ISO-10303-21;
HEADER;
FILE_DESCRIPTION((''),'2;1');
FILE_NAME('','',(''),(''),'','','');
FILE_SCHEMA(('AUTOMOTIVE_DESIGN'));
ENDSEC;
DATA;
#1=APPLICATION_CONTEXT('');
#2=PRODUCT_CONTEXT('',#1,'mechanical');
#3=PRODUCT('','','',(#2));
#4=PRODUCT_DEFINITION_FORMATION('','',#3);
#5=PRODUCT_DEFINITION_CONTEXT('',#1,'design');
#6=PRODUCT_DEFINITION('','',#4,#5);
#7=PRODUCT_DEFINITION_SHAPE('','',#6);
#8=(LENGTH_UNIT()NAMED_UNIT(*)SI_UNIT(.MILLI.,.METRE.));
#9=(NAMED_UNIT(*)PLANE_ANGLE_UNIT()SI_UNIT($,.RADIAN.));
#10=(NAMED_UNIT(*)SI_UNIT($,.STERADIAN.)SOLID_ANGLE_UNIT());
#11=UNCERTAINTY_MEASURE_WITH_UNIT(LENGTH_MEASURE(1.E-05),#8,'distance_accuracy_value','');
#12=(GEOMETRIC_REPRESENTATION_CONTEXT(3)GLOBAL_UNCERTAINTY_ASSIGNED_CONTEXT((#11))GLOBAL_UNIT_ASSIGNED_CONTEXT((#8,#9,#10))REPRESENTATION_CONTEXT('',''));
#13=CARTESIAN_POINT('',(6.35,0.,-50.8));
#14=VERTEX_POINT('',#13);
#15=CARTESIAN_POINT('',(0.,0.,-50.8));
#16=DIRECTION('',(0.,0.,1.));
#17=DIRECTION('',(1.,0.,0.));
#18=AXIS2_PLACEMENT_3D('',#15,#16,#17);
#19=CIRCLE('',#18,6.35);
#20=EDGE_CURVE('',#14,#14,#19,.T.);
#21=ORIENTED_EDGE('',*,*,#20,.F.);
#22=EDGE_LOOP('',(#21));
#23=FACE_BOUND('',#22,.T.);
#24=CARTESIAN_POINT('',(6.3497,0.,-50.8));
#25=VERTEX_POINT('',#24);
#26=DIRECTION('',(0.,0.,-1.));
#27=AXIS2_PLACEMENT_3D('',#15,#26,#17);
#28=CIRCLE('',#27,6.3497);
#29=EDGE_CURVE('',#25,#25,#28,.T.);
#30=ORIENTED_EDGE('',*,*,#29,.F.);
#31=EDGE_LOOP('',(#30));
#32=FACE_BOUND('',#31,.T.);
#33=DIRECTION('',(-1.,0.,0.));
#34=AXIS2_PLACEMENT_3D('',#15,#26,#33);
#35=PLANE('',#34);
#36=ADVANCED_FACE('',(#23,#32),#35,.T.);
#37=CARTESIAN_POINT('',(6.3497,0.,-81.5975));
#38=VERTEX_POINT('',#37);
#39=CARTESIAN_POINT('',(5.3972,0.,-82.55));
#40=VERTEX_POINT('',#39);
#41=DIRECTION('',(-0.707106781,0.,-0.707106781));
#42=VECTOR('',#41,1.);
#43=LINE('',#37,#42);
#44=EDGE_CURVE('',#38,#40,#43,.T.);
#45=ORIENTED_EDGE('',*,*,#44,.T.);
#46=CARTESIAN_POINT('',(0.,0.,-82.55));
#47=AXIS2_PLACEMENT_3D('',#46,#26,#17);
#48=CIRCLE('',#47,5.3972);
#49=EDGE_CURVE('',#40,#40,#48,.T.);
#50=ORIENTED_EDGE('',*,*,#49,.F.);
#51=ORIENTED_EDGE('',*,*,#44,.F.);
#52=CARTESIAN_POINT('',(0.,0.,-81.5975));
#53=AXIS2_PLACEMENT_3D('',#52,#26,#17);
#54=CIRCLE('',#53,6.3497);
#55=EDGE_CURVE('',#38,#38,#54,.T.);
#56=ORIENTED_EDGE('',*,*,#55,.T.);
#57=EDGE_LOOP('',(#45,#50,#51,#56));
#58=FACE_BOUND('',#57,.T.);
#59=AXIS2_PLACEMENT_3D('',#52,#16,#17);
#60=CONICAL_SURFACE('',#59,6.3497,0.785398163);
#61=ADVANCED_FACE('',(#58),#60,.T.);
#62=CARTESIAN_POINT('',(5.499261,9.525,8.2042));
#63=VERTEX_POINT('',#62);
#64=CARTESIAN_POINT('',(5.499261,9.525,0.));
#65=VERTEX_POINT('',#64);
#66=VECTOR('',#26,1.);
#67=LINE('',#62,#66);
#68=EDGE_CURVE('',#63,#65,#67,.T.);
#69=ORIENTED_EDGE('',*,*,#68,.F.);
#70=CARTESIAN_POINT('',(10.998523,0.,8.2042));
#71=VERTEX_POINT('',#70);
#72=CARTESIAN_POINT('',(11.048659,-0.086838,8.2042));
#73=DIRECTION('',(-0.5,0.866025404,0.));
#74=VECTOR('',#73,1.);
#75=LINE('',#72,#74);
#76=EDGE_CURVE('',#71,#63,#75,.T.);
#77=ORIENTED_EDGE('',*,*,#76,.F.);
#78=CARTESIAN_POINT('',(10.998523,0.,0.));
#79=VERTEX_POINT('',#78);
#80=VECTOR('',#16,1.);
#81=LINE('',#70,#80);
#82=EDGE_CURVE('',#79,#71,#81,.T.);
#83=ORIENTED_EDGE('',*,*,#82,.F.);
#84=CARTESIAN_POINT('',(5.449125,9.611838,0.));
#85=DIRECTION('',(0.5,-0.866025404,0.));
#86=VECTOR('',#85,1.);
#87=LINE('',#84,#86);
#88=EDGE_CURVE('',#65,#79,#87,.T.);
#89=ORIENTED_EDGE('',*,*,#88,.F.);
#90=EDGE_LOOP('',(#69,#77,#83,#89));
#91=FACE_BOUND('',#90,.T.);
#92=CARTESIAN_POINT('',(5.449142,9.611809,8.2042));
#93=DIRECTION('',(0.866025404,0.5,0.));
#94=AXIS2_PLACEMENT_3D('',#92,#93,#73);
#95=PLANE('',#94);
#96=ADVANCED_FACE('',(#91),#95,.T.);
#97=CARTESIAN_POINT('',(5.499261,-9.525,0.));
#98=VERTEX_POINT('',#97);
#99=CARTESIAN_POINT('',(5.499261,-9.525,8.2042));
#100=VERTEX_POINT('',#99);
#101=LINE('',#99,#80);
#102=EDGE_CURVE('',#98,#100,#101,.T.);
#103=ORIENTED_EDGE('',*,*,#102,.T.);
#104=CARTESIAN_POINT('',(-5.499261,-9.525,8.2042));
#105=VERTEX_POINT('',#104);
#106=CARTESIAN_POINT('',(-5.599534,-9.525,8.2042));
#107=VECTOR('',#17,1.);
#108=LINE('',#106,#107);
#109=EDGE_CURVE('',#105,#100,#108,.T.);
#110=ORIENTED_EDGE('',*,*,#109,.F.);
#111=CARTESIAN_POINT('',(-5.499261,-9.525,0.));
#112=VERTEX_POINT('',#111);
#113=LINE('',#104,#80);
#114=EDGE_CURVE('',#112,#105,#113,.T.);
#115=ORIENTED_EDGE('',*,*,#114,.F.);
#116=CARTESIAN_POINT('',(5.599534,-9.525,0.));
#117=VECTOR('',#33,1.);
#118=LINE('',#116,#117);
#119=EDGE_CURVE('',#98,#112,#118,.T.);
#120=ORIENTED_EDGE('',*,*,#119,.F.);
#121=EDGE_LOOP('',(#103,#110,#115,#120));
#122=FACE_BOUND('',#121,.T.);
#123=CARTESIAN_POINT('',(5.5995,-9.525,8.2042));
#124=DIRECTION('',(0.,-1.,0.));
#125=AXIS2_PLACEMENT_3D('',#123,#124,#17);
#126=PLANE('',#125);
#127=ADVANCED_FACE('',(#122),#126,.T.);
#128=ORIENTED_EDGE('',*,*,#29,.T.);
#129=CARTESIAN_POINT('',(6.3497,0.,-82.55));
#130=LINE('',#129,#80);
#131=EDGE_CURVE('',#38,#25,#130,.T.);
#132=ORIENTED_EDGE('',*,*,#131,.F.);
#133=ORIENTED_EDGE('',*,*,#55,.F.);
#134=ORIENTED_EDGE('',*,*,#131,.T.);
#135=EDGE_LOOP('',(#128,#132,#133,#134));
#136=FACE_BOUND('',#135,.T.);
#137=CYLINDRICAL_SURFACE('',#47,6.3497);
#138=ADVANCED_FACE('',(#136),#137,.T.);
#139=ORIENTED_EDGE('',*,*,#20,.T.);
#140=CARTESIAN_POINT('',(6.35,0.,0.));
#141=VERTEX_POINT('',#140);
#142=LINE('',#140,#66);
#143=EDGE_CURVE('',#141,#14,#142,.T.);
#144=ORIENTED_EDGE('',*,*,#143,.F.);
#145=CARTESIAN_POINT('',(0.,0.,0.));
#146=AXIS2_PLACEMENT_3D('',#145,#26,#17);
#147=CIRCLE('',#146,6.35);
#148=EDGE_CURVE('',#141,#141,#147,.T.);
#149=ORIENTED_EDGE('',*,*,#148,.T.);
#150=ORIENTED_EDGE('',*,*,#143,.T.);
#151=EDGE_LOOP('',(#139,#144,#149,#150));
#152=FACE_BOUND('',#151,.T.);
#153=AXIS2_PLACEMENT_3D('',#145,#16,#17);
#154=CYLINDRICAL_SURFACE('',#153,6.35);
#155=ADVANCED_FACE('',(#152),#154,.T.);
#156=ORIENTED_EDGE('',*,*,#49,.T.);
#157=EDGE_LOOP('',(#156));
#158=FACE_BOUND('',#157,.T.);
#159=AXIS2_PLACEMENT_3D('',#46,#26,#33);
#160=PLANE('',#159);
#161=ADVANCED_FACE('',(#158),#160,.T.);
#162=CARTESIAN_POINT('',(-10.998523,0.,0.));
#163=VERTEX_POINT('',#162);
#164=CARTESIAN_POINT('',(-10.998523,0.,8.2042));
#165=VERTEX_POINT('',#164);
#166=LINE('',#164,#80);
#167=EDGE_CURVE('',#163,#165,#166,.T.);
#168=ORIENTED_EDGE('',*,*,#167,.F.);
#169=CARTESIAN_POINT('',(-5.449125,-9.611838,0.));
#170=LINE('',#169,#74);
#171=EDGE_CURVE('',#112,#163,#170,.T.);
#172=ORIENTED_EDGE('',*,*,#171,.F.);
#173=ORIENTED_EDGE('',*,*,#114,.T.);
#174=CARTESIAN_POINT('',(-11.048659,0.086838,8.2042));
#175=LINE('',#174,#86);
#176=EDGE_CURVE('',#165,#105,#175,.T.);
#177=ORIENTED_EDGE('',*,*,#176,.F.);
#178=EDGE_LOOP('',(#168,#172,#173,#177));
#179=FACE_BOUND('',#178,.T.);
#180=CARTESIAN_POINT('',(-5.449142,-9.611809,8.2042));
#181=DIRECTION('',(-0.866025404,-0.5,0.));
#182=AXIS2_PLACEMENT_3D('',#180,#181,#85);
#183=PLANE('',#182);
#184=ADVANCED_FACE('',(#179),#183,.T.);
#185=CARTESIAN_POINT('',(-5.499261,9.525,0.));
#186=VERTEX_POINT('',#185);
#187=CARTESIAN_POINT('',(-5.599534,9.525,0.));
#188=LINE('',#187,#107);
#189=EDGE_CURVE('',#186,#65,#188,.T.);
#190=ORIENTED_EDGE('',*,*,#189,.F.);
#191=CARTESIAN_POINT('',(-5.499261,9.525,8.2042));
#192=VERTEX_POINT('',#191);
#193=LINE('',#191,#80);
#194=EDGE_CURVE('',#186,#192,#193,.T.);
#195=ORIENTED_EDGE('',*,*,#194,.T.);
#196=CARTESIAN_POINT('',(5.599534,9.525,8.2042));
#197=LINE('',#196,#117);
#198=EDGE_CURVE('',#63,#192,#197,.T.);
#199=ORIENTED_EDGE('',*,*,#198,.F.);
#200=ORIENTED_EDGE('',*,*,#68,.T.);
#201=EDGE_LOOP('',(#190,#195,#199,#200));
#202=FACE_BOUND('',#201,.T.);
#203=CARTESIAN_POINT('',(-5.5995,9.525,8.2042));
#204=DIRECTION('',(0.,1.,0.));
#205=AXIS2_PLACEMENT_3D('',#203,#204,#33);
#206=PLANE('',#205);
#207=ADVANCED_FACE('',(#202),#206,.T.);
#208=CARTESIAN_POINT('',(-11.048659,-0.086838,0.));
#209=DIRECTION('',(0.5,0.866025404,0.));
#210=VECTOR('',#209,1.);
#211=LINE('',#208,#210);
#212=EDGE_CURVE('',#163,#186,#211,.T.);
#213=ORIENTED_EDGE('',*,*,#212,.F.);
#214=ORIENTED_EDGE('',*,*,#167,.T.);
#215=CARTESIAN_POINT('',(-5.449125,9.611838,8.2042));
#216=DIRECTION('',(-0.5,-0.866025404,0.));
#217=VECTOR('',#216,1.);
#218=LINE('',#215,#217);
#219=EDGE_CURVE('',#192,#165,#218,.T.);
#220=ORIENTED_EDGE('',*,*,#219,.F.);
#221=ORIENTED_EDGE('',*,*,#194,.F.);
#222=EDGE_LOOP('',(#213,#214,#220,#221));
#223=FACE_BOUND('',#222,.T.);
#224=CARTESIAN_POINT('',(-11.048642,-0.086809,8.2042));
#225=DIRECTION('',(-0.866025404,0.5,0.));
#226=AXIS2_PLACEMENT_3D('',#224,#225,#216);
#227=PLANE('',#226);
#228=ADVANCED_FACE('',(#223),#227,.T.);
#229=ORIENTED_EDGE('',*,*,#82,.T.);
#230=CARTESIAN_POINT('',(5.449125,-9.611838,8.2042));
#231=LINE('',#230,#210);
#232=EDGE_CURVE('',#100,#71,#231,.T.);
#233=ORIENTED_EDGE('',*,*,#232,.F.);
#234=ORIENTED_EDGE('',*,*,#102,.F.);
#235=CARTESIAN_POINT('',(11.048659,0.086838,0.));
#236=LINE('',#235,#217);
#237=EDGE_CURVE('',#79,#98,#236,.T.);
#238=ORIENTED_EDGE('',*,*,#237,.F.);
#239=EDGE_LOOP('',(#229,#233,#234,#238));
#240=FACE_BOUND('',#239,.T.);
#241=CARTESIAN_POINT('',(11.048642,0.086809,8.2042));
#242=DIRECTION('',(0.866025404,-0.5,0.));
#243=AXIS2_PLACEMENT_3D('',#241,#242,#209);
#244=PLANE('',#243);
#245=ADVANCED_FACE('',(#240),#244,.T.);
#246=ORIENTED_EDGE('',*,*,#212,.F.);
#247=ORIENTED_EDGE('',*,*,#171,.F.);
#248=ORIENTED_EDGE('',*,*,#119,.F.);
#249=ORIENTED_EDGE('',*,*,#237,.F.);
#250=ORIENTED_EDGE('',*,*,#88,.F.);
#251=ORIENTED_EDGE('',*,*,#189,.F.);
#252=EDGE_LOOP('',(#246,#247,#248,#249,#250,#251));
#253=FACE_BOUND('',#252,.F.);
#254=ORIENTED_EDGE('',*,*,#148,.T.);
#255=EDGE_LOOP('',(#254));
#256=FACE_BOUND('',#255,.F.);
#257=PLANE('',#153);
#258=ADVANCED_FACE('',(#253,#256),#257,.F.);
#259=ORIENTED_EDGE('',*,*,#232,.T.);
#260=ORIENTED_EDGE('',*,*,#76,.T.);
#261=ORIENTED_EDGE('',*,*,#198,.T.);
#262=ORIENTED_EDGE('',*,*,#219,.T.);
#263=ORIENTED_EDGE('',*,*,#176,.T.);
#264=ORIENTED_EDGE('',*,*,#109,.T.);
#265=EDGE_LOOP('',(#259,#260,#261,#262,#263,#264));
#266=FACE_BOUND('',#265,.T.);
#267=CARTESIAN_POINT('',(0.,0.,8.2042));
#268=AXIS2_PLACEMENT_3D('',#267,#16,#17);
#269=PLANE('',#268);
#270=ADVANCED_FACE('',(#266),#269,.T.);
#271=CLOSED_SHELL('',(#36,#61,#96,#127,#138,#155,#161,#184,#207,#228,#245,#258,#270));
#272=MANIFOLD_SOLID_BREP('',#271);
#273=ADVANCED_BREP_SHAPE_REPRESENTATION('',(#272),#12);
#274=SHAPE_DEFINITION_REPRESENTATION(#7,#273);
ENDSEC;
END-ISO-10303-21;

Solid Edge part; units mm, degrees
sketch "Sketch1" plane through (0, 0, 0) normal (0, 0, 1) x (1, 0, 0)
  circle A0 centre (0, 0) radius 11.049
  dimension "D1" = 22.098
extrude "Protrusion1" add sketch "Sketch1" along normal blind 8.2042
sketch "Sketch2" plane through (0, 0, 0) normal (0, 0, -1) x (1, 0, 0)
  circle A0 centre (0, 0) radius 6.35
extrude "Protrusion2" add sketch "Sketch2" along normal blind 82.55
sketch "Sketch3" plane through (0, 0, -82.55) normal (0, 0, -1) x (1, 0, 0)
  circle A0 centre (0, 0) radius 6.3497
extrude "Cutout1" cut sketch "Sketch3" against normal blind 31.75 flip side to cut
chamfer "Chamfer_1" distance 0.9525 angle 45 1 edges at (-6.3497, 0, -82.55)
sketch "Sketch4" plane through (0, 0, 8.2042) normal (0, 0, 1) x (1, 0, 0)
  line L0 (-5.5995, 9.525) -> (5.5995, 9.525)
  dimension "D1" = 19.05
extrude "Cutout2" cut sketch "Sketch4" against normal up to next material side at (0, 9.575, 8.2042)
pattern_circular "Pattern1" count 6 over 360 about axis through (0, 0, 8.2042) along (0, 0, 1) of "Cutout2"
properties part number "24100105"
